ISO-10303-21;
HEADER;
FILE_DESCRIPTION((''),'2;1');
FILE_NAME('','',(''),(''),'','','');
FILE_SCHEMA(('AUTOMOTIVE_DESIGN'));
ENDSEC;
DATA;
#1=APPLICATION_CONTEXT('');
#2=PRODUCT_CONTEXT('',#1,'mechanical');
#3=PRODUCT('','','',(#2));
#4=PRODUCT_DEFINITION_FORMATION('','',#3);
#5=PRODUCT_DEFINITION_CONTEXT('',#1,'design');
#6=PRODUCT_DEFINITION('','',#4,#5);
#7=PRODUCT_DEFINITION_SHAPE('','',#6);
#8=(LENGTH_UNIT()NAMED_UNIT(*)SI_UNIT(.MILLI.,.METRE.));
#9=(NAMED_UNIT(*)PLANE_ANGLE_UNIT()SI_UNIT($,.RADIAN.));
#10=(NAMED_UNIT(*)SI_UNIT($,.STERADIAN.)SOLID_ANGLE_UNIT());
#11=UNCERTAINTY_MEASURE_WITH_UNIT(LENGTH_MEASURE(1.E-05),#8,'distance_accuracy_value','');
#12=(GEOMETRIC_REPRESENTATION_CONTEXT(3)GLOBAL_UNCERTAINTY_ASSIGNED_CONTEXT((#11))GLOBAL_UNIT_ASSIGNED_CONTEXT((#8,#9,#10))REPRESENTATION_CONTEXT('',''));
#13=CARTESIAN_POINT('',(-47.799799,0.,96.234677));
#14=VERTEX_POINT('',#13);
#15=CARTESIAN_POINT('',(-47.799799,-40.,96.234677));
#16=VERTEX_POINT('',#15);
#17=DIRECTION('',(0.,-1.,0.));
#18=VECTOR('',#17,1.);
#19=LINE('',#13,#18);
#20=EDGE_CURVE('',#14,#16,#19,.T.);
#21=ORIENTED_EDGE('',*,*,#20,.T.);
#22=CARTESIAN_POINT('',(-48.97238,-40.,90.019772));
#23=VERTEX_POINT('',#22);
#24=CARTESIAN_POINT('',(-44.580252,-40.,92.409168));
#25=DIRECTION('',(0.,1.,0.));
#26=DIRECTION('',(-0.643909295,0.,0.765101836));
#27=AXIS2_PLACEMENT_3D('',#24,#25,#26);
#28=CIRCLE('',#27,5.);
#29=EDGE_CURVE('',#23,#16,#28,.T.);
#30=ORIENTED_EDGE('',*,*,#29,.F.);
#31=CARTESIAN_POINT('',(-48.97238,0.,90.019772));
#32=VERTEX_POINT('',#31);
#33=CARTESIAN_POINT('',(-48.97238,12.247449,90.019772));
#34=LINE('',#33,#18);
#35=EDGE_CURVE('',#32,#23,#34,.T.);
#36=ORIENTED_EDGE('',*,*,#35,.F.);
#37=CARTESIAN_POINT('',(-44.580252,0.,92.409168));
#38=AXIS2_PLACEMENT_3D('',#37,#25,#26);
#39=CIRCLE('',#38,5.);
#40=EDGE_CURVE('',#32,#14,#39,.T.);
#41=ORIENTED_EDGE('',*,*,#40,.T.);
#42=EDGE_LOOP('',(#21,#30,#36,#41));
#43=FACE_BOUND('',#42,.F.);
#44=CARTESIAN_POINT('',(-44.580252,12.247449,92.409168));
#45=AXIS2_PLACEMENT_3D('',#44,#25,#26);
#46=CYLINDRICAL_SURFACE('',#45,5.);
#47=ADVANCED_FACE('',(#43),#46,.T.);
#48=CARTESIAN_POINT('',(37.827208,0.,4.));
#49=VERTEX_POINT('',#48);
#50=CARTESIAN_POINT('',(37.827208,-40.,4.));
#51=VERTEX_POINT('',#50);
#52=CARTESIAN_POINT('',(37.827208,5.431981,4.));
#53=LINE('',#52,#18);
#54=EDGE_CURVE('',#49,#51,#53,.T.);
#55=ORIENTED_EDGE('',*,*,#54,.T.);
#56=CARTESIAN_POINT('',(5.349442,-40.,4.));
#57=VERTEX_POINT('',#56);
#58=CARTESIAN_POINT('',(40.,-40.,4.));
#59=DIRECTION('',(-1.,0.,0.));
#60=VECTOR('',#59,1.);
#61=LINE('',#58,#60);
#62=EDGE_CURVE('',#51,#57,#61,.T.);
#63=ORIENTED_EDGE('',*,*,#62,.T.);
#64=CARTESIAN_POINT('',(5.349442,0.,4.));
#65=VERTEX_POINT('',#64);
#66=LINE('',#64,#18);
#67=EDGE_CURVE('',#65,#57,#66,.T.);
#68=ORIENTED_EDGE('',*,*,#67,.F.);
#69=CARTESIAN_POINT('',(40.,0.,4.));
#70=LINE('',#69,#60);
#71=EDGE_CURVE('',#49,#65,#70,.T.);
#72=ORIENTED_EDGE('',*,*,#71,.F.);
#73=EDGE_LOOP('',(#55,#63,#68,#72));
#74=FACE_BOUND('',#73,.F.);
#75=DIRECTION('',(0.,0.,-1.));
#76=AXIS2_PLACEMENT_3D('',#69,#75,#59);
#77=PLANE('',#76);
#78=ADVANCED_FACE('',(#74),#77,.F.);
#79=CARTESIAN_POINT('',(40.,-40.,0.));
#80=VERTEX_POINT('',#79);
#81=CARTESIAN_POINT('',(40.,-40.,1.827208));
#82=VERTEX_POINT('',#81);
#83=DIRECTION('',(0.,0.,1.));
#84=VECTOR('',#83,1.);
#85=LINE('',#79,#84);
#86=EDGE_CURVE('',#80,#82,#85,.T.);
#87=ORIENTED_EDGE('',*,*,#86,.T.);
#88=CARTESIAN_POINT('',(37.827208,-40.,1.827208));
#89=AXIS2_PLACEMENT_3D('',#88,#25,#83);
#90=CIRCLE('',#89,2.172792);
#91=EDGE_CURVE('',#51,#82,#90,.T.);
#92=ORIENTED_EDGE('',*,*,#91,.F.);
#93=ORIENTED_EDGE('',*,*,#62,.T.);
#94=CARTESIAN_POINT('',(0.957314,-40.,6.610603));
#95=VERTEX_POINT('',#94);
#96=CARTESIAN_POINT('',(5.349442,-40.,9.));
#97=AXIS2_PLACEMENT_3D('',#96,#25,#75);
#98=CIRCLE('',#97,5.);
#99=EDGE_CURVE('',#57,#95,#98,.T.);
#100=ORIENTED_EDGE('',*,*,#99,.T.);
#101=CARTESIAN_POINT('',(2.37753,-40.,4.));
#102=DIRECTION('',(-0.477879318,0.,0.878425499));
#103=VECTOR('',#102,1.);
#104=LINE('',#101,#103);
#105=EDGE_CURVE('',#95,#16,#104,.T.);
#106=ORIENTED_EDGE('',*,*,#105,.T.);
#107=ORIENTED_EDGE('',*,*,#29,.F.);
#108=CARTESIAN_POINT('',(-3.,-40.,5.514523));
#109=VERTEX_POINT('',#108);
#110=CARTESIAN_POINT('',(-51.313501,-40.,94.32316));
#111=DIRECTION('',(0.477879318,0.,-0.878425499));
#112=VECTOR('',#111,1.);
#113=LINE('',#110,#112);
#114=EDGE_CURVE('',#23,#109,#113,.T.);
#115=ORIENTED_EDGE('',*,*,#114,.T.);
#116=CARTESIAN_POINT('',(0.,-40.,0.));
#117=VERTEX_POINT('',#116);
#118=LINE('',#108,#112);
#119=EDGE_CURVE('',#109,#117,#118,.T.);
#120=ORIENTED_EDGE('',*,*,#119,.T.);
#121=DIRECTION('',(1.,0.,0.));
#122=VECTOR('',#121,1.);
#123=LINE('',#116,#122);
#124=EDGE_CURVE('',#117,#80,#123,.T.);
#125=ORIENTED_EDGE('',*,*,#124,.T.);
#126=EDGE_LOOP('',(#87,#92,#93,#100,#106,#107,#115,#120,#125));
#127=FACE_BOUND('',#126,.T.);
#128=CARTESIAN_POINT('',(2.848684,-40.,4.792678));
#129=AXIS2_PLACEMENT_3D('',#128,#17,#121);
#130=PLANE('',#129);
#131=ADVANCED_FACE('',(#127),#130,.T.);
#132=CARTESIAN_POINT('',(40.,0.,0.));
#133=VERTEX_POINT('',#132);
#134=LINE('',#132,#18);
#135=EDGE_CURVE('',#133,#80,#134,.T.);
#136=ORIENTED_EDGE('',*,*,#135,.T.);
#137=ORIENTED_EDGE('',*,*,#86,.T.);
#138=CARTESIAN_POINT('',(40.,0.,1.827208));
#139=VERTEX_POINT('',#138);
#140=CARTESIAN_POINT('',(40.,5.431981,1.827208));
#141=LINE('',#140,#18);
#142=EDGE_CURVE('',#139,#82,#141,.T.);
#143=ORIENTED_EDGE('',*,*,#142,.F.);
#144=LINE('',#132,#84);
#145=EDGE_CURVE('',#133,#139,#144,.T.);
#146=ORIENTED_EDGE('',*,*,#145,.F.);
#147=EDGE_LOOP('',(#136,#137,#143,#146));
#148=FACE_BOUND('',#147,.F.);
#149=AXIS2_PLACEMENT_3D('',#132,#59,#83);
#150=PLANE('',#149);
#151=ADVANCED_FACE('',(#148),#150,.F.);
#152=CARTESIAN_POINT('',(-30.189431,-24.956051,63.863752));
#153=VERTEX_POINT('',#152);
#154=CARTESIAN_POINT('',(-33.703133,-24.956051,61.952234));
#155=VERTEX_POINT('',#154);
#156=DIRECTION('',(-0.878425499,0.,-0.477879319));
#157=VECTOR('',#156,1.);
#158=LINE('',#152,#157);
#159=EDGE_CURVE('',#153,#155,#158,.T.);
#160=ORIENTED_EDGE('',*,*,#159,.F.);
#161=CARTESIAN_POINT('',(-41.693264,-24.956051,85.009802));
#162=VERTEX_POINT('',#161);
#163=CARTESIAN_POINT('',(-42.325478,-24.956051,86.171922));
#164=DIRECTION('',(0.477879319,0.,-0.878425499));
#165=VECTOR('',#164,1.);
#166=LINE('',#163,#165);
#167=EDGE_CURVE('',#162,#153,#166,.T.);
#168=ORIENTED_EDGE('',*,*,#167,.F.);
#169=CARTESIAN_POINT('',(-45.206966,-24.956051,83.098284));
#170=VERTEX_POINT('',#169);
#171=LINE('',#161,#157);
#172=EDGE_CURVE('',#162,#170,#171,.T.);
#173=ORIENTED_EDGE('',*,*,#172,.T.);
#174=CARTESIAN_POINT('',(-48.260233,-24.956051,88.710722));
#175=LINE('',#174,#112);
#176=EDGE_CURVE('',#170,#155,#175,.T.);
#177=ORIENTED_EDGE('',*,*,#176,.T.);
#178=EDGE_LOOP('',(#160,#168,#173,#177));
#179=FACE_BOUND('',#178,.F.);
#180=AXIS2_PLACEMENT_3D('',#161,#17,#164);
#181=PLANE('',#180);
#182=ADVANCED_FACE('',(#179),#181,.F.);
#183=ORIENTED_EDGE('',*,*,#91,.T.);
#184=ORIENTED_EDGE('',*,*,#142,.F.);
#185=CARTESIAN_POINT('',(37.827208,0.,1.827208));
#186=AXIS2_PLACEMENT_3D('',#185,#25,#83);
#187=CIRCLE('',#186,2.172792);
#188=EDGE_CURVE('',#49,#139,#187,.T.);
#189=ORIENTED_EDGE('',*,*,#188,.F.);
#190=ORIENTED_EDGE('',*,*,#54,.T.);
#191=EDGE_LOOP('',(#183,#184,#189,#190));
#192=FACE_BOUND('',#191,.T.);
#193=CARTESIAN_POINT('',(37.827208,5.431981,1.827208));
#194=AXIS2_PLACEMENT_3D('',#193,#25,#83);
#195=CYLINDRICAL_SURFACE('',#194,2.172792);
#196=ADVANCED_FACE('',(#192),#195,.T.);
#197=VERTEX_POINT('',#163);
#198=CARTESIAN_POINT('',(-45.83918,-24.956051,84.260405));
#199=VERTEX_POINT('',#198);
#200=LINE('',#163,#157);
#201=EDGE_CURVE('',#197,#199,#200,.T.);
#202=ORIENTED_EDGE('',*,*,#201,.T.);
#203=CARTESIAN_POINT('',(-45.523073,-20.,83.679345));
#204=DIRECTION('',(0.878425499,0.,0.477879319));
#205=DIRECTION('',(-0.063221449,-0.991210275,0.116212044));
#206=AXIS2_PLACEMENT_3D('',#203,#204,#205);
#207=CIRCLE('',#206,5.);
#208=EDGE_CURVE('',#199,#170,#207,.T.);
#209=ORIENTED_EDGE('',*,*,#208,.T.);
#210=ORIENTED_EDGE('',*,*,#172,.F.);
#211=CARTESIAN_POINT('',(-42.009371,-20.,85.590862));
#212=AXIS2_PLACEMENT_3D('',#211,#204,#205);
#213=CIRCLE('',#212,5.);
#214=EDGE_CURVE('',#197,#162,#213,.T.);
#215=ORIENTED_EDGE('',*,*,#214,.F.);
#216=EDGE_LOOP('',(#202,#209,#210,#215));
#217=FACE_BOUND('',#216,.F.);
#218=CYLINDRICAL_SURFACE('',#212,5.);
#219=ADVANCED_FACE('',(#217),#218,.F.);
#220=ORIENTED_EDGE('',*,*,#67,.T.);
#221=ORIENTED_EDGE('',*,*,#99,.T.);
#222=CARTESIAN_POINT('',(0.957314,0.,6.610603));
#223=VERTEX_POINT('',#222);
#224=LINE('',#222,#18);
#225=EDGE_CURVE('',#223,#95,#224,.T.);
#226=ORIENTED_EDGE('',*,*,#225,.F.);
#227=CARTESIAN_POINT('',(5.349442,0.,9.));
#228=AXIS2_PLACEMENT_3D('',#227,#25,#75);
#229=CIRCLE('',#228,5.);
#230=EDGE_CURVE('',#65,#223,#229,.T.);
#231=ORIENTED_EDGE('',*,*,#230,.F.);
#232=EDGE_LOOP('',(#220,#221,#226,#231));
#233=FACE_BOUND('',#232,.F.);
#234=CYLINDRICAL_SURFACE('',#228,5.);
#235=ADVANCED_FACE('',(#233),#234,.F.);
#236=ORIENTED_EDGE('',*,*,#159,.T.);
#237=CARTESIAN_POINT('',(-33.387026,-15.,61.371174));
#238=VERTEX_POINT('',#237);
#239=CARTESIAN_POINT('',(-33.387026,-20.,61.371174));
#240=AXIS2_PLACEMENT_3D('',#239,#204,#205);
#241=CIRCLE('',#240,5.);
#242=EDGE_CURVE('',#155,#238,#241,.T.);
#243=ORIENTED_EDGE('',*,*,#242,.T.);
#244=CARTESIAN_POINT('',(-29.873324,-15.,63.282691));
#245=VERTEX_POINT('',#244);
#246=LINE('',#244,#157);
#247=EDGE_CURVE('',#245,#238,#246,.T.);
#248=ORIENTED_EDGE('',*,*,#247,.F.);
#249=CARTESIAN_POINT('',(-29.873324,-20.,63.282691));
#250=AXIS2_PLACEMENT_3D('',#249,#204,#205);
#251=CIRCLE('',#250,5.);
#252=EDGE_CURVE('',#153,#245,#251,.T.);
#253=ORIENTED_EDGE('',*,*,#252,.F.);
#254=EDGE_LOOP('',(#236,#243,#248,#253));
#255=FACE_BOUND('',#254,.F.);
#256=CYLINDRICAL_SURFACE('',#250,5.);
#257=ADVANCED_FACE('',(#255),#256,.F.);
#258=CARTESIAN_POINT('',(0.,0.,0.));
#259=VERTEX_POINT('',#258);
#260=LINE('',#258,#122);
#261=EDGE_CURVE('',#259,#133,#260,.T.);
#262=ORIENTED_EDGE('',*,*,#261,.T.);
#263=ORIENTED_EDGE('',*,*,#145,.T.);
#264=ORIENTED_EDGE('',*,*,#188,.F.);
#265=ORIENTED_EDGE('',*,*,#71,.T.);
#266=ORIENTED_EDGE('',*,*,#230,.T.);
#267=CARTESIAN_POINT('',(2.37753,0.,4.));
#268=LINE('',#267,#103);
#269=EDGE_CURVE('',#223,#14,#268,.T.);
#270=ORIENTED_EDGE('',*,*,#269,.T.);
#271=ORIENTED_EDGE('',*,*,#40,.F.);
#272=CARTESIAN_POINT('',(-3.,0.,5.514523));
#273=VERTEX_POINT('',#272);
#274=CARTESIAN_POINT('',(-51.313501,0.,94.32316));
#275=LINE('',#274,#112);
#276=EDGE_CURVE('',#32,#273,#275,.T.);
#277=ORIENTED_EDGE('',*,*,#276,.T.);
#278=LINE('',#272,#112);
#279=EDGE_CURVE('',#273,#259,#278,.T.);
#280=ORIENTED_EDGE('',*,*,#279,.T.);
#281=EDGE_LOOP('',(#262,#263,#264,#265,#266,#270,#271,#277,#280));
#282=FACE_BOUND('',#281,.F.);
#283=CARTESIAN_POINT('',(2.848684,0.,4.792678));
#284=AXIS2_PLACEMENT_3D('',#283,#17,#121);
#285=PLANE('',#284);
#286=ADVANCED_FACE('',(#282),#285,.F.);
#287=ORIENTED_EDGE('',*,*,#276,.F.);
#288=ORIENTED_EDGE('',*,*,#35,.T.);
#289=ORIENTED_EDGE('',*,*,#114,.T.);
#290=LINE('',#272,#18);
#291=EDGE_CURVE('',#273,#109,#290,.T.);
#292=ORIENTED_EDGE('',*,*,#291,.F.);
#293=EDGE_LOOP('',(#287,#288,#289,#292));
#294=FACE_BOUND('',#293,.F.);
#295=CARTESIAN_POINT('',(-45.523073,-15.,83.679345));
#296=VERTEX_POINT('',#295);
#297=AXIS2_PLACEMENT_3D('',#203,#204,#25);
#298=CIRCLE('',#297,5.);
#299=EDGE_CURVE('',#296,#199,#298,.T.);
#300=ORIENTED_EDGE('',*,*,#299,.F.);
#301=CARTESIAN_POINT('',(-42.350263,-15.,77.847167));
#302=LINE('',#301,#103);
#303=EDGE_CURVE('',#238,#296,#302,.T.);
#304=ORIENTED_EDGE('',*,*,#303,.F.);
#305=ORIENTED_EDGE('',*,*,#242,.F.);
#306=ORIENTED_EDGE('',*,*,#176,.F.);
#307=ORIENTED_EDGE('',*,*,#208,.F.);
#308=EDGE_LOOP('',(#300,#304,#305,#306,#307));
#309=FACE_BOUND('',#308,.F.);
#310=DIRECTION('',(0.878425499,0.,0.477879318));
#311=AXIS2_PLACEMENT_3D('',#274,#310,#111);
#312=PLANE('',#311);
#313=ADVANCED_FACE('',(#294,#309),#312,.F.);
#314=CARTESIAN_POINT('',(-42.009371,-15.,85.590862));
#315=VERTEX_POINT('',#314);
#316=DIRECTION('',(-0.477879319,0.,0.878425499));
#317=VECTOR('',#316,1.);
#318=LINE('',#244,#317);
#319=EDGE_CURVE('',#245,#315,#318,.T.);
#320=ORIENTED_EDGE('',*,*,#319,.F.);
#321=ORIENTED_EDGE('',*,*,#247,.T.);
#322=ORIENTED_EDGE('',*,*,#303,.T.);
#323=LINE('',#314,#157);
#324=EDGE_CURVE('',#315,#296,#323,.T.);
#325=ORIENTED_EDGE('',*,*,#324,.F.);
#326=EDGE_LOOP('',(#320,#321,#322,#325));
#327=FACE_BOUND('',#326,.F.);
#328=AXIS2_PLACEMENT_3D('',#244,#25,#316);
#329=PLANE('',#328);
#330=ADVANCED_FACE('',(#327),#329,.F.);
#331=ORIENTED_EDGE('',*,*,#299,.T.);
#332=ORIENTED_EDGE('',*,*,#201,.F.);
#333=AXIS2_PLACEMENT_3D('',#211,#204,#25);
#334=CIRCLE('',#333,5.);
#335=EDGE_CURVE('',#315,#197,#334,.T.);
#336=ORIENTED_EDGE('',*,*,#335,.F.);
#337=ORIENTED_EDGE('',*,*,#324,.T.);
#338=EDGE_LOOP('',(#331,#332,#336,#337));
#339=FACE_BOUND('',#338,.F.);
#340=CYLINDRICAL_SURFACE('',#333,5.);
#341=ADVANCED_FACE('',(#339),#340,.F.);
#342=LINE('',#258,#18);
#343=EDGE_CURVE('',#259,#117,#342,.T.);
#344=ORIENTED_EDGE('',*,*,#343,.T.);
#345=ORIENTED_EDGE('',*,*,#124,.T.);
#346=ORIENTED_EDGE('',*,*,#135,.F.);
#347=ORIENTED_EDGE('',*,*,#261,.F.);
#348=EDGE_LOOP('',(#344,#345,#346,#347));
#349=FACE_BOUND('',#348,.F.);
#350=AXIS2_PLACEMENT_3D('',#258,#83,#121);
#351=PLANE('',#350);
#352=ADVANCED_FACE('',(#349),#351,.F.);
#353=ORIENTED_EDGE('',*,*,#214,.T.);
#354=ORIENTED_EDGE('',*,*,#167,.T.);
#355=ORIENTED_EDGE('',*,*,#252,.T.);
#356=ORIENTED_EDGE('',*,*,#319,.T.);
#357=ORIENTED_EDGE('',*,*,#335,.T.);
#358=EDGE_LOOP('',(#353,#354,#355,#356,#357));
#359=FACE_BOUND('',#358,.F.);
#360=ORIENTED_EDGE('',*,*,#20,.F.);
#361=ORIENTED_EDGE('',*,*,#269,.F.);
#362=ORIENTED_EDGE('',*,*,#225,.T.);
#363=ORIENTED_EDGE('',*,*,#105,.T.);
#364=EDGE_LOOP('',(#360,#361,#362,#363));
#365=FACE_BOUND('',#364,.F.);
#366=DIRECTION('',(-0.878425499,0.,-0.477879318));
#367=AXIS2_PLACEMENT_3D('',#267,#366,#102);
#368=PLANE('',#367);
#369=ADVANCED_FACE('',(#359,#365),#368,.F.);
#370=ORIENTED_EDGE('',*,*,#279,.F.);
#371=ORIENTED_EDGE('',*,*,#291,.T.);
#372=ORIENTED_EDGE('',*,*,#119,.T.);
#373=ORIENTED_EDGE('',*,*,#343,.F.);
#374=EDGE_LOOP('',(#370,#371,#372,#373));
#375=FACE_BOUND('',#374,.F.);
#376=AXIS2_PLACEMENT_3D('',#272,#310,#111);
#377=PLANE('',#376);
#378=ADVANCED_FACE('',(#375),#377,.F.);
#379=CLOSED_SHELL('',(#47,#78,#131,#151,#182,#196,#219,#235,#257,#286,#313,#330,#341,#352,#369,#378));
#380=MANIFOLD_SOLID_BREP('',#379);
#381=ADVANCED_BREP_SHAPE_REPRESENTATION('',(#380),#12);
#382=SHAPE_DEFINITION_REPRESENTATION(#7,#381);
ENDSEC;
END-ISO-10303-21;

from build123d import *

# Parameters (mm, degrees)
F1_DEPTH    = 40
F2_T1_DEPTH = 40
F2_T3_DEPTH = 64.4948974279
F3_T1_DEPTH = 50.8639610307
F5_DEPTH    = 25


# Not quite as in the source:
# - a fillet or chamfer that OpenCascade refuses, or shapes differently, is made with other operations: its cross-section is extruded or revolved along the edge and cut away or added
# - a feature names something its author has since deleted; it is built from what else it names


with BuildPart() as f1:
    # F0 (on Front) → F1 (new body)
    with BuildSketch(Plane.XZ):
        Polygon((-51.3135007212, 94.3231601012), (-3, 5.5145230071), (0, 0), (40, 0), (40, 4), (2.3775297152, 4), (-47.7997987259, 96.2346773752), align=None)
    extrude(amount=F1_DEPTH)

    # F2: fillet of radius 5 on 2 edges, made by hand

    # F2_s2 → F2_t1 (join)
    with BuildSketch(Plane.XZ):
        with BuildLine():
            ThreePointArc((5.3494418593, 4), (2.7947386439, 4.7019200239), (0.9573143652, 6.6106034076))
            Line((0.9573143652, 6.6106034076), (2.3775297152, 4))
            Line((2.3775297152, 4), (5.3494418593, 4))
        make_face()
    extrude(amount=F2_T1_DEPTH)

    # F2_s4 → F2_t3 (cut)
    with BuildSketch(Plane.XZ.offset(-12.2474487139)):
        with BuildLine():
            ThreePointArc((-47.7997987259, 96.2346773752), (-49.4935666702, 93.3361748844), (-48.9723797433, 90.019771603))
            Line((-48.9723797433, 90.019771603), (-51.3135007212, 94.3231601012))
            Line((-51.3135007212, 94.3231601012), (-47.7997987259, 96.2346773752))
        make_face()
    extrude(amount=F2_T3_DEPTH, mode=Mode.SUBTRACT)

    # F3: fillet of radius 2.1727922061 on 2 edges, made by hand

    # F3_s2 → F3_t1 (cut)
    with BuildSketch(Plane.XZ.offset(-5.4319805153)):
        with BuildLine():
            ThreePointArc((37.8272077939, 4), (39.3636038969, 3.3636038969), (40, 1.8272077939))
            Line((40, 1.8272077939), (40, 4))
            Line((40, 4), (37.8272077939, 4))
        make_face()
    extrude(amount=F3_T1_DEPTH, mode=Mode.SUBTRACT)

    # F4 (on face) → F5 (cut)
    with BuildSketch(Plane(origin=(3.5137019952, 0, 1.9115172739), x_dir=(0, 1, 0), z_dir=(0.8784254988, 0, 0.4778793185))):
        with BuildLine():
            Line((-15, 69.8649734259), (-15, 95.260605216))
            ThreePointArc((-15, 95.260605216), (-19.6685312037, 100.2496059614), (-24.9560513748, 95.9220844447))
            Line((-24.9560513748, 95.9220844447), (-24.9560513748, 94.5991259873))
            Line((-24.9560513748, 94.5991259873), (-24.9560513748, 70.5264526546))
            ThreePointArc((-24.9560513748, 70.5264526546), (-20.3314687963, 64.8759726805), (-15, 69.8649734259))
        make_face()
        with BuildLine():
            Line((-24.9560513748, 94.5991259873), (-24.9560513748, 95.9220844447))
            ThreePointArc((-24.9560513748, 95.9220844447), (-25, 95.260605216), (-24.9560513748, 94.5991259873))
        make_face()
    extrude(amount=-F5_DEPTH, mode=Mode.SUBTRACT)


solid = f1.part
